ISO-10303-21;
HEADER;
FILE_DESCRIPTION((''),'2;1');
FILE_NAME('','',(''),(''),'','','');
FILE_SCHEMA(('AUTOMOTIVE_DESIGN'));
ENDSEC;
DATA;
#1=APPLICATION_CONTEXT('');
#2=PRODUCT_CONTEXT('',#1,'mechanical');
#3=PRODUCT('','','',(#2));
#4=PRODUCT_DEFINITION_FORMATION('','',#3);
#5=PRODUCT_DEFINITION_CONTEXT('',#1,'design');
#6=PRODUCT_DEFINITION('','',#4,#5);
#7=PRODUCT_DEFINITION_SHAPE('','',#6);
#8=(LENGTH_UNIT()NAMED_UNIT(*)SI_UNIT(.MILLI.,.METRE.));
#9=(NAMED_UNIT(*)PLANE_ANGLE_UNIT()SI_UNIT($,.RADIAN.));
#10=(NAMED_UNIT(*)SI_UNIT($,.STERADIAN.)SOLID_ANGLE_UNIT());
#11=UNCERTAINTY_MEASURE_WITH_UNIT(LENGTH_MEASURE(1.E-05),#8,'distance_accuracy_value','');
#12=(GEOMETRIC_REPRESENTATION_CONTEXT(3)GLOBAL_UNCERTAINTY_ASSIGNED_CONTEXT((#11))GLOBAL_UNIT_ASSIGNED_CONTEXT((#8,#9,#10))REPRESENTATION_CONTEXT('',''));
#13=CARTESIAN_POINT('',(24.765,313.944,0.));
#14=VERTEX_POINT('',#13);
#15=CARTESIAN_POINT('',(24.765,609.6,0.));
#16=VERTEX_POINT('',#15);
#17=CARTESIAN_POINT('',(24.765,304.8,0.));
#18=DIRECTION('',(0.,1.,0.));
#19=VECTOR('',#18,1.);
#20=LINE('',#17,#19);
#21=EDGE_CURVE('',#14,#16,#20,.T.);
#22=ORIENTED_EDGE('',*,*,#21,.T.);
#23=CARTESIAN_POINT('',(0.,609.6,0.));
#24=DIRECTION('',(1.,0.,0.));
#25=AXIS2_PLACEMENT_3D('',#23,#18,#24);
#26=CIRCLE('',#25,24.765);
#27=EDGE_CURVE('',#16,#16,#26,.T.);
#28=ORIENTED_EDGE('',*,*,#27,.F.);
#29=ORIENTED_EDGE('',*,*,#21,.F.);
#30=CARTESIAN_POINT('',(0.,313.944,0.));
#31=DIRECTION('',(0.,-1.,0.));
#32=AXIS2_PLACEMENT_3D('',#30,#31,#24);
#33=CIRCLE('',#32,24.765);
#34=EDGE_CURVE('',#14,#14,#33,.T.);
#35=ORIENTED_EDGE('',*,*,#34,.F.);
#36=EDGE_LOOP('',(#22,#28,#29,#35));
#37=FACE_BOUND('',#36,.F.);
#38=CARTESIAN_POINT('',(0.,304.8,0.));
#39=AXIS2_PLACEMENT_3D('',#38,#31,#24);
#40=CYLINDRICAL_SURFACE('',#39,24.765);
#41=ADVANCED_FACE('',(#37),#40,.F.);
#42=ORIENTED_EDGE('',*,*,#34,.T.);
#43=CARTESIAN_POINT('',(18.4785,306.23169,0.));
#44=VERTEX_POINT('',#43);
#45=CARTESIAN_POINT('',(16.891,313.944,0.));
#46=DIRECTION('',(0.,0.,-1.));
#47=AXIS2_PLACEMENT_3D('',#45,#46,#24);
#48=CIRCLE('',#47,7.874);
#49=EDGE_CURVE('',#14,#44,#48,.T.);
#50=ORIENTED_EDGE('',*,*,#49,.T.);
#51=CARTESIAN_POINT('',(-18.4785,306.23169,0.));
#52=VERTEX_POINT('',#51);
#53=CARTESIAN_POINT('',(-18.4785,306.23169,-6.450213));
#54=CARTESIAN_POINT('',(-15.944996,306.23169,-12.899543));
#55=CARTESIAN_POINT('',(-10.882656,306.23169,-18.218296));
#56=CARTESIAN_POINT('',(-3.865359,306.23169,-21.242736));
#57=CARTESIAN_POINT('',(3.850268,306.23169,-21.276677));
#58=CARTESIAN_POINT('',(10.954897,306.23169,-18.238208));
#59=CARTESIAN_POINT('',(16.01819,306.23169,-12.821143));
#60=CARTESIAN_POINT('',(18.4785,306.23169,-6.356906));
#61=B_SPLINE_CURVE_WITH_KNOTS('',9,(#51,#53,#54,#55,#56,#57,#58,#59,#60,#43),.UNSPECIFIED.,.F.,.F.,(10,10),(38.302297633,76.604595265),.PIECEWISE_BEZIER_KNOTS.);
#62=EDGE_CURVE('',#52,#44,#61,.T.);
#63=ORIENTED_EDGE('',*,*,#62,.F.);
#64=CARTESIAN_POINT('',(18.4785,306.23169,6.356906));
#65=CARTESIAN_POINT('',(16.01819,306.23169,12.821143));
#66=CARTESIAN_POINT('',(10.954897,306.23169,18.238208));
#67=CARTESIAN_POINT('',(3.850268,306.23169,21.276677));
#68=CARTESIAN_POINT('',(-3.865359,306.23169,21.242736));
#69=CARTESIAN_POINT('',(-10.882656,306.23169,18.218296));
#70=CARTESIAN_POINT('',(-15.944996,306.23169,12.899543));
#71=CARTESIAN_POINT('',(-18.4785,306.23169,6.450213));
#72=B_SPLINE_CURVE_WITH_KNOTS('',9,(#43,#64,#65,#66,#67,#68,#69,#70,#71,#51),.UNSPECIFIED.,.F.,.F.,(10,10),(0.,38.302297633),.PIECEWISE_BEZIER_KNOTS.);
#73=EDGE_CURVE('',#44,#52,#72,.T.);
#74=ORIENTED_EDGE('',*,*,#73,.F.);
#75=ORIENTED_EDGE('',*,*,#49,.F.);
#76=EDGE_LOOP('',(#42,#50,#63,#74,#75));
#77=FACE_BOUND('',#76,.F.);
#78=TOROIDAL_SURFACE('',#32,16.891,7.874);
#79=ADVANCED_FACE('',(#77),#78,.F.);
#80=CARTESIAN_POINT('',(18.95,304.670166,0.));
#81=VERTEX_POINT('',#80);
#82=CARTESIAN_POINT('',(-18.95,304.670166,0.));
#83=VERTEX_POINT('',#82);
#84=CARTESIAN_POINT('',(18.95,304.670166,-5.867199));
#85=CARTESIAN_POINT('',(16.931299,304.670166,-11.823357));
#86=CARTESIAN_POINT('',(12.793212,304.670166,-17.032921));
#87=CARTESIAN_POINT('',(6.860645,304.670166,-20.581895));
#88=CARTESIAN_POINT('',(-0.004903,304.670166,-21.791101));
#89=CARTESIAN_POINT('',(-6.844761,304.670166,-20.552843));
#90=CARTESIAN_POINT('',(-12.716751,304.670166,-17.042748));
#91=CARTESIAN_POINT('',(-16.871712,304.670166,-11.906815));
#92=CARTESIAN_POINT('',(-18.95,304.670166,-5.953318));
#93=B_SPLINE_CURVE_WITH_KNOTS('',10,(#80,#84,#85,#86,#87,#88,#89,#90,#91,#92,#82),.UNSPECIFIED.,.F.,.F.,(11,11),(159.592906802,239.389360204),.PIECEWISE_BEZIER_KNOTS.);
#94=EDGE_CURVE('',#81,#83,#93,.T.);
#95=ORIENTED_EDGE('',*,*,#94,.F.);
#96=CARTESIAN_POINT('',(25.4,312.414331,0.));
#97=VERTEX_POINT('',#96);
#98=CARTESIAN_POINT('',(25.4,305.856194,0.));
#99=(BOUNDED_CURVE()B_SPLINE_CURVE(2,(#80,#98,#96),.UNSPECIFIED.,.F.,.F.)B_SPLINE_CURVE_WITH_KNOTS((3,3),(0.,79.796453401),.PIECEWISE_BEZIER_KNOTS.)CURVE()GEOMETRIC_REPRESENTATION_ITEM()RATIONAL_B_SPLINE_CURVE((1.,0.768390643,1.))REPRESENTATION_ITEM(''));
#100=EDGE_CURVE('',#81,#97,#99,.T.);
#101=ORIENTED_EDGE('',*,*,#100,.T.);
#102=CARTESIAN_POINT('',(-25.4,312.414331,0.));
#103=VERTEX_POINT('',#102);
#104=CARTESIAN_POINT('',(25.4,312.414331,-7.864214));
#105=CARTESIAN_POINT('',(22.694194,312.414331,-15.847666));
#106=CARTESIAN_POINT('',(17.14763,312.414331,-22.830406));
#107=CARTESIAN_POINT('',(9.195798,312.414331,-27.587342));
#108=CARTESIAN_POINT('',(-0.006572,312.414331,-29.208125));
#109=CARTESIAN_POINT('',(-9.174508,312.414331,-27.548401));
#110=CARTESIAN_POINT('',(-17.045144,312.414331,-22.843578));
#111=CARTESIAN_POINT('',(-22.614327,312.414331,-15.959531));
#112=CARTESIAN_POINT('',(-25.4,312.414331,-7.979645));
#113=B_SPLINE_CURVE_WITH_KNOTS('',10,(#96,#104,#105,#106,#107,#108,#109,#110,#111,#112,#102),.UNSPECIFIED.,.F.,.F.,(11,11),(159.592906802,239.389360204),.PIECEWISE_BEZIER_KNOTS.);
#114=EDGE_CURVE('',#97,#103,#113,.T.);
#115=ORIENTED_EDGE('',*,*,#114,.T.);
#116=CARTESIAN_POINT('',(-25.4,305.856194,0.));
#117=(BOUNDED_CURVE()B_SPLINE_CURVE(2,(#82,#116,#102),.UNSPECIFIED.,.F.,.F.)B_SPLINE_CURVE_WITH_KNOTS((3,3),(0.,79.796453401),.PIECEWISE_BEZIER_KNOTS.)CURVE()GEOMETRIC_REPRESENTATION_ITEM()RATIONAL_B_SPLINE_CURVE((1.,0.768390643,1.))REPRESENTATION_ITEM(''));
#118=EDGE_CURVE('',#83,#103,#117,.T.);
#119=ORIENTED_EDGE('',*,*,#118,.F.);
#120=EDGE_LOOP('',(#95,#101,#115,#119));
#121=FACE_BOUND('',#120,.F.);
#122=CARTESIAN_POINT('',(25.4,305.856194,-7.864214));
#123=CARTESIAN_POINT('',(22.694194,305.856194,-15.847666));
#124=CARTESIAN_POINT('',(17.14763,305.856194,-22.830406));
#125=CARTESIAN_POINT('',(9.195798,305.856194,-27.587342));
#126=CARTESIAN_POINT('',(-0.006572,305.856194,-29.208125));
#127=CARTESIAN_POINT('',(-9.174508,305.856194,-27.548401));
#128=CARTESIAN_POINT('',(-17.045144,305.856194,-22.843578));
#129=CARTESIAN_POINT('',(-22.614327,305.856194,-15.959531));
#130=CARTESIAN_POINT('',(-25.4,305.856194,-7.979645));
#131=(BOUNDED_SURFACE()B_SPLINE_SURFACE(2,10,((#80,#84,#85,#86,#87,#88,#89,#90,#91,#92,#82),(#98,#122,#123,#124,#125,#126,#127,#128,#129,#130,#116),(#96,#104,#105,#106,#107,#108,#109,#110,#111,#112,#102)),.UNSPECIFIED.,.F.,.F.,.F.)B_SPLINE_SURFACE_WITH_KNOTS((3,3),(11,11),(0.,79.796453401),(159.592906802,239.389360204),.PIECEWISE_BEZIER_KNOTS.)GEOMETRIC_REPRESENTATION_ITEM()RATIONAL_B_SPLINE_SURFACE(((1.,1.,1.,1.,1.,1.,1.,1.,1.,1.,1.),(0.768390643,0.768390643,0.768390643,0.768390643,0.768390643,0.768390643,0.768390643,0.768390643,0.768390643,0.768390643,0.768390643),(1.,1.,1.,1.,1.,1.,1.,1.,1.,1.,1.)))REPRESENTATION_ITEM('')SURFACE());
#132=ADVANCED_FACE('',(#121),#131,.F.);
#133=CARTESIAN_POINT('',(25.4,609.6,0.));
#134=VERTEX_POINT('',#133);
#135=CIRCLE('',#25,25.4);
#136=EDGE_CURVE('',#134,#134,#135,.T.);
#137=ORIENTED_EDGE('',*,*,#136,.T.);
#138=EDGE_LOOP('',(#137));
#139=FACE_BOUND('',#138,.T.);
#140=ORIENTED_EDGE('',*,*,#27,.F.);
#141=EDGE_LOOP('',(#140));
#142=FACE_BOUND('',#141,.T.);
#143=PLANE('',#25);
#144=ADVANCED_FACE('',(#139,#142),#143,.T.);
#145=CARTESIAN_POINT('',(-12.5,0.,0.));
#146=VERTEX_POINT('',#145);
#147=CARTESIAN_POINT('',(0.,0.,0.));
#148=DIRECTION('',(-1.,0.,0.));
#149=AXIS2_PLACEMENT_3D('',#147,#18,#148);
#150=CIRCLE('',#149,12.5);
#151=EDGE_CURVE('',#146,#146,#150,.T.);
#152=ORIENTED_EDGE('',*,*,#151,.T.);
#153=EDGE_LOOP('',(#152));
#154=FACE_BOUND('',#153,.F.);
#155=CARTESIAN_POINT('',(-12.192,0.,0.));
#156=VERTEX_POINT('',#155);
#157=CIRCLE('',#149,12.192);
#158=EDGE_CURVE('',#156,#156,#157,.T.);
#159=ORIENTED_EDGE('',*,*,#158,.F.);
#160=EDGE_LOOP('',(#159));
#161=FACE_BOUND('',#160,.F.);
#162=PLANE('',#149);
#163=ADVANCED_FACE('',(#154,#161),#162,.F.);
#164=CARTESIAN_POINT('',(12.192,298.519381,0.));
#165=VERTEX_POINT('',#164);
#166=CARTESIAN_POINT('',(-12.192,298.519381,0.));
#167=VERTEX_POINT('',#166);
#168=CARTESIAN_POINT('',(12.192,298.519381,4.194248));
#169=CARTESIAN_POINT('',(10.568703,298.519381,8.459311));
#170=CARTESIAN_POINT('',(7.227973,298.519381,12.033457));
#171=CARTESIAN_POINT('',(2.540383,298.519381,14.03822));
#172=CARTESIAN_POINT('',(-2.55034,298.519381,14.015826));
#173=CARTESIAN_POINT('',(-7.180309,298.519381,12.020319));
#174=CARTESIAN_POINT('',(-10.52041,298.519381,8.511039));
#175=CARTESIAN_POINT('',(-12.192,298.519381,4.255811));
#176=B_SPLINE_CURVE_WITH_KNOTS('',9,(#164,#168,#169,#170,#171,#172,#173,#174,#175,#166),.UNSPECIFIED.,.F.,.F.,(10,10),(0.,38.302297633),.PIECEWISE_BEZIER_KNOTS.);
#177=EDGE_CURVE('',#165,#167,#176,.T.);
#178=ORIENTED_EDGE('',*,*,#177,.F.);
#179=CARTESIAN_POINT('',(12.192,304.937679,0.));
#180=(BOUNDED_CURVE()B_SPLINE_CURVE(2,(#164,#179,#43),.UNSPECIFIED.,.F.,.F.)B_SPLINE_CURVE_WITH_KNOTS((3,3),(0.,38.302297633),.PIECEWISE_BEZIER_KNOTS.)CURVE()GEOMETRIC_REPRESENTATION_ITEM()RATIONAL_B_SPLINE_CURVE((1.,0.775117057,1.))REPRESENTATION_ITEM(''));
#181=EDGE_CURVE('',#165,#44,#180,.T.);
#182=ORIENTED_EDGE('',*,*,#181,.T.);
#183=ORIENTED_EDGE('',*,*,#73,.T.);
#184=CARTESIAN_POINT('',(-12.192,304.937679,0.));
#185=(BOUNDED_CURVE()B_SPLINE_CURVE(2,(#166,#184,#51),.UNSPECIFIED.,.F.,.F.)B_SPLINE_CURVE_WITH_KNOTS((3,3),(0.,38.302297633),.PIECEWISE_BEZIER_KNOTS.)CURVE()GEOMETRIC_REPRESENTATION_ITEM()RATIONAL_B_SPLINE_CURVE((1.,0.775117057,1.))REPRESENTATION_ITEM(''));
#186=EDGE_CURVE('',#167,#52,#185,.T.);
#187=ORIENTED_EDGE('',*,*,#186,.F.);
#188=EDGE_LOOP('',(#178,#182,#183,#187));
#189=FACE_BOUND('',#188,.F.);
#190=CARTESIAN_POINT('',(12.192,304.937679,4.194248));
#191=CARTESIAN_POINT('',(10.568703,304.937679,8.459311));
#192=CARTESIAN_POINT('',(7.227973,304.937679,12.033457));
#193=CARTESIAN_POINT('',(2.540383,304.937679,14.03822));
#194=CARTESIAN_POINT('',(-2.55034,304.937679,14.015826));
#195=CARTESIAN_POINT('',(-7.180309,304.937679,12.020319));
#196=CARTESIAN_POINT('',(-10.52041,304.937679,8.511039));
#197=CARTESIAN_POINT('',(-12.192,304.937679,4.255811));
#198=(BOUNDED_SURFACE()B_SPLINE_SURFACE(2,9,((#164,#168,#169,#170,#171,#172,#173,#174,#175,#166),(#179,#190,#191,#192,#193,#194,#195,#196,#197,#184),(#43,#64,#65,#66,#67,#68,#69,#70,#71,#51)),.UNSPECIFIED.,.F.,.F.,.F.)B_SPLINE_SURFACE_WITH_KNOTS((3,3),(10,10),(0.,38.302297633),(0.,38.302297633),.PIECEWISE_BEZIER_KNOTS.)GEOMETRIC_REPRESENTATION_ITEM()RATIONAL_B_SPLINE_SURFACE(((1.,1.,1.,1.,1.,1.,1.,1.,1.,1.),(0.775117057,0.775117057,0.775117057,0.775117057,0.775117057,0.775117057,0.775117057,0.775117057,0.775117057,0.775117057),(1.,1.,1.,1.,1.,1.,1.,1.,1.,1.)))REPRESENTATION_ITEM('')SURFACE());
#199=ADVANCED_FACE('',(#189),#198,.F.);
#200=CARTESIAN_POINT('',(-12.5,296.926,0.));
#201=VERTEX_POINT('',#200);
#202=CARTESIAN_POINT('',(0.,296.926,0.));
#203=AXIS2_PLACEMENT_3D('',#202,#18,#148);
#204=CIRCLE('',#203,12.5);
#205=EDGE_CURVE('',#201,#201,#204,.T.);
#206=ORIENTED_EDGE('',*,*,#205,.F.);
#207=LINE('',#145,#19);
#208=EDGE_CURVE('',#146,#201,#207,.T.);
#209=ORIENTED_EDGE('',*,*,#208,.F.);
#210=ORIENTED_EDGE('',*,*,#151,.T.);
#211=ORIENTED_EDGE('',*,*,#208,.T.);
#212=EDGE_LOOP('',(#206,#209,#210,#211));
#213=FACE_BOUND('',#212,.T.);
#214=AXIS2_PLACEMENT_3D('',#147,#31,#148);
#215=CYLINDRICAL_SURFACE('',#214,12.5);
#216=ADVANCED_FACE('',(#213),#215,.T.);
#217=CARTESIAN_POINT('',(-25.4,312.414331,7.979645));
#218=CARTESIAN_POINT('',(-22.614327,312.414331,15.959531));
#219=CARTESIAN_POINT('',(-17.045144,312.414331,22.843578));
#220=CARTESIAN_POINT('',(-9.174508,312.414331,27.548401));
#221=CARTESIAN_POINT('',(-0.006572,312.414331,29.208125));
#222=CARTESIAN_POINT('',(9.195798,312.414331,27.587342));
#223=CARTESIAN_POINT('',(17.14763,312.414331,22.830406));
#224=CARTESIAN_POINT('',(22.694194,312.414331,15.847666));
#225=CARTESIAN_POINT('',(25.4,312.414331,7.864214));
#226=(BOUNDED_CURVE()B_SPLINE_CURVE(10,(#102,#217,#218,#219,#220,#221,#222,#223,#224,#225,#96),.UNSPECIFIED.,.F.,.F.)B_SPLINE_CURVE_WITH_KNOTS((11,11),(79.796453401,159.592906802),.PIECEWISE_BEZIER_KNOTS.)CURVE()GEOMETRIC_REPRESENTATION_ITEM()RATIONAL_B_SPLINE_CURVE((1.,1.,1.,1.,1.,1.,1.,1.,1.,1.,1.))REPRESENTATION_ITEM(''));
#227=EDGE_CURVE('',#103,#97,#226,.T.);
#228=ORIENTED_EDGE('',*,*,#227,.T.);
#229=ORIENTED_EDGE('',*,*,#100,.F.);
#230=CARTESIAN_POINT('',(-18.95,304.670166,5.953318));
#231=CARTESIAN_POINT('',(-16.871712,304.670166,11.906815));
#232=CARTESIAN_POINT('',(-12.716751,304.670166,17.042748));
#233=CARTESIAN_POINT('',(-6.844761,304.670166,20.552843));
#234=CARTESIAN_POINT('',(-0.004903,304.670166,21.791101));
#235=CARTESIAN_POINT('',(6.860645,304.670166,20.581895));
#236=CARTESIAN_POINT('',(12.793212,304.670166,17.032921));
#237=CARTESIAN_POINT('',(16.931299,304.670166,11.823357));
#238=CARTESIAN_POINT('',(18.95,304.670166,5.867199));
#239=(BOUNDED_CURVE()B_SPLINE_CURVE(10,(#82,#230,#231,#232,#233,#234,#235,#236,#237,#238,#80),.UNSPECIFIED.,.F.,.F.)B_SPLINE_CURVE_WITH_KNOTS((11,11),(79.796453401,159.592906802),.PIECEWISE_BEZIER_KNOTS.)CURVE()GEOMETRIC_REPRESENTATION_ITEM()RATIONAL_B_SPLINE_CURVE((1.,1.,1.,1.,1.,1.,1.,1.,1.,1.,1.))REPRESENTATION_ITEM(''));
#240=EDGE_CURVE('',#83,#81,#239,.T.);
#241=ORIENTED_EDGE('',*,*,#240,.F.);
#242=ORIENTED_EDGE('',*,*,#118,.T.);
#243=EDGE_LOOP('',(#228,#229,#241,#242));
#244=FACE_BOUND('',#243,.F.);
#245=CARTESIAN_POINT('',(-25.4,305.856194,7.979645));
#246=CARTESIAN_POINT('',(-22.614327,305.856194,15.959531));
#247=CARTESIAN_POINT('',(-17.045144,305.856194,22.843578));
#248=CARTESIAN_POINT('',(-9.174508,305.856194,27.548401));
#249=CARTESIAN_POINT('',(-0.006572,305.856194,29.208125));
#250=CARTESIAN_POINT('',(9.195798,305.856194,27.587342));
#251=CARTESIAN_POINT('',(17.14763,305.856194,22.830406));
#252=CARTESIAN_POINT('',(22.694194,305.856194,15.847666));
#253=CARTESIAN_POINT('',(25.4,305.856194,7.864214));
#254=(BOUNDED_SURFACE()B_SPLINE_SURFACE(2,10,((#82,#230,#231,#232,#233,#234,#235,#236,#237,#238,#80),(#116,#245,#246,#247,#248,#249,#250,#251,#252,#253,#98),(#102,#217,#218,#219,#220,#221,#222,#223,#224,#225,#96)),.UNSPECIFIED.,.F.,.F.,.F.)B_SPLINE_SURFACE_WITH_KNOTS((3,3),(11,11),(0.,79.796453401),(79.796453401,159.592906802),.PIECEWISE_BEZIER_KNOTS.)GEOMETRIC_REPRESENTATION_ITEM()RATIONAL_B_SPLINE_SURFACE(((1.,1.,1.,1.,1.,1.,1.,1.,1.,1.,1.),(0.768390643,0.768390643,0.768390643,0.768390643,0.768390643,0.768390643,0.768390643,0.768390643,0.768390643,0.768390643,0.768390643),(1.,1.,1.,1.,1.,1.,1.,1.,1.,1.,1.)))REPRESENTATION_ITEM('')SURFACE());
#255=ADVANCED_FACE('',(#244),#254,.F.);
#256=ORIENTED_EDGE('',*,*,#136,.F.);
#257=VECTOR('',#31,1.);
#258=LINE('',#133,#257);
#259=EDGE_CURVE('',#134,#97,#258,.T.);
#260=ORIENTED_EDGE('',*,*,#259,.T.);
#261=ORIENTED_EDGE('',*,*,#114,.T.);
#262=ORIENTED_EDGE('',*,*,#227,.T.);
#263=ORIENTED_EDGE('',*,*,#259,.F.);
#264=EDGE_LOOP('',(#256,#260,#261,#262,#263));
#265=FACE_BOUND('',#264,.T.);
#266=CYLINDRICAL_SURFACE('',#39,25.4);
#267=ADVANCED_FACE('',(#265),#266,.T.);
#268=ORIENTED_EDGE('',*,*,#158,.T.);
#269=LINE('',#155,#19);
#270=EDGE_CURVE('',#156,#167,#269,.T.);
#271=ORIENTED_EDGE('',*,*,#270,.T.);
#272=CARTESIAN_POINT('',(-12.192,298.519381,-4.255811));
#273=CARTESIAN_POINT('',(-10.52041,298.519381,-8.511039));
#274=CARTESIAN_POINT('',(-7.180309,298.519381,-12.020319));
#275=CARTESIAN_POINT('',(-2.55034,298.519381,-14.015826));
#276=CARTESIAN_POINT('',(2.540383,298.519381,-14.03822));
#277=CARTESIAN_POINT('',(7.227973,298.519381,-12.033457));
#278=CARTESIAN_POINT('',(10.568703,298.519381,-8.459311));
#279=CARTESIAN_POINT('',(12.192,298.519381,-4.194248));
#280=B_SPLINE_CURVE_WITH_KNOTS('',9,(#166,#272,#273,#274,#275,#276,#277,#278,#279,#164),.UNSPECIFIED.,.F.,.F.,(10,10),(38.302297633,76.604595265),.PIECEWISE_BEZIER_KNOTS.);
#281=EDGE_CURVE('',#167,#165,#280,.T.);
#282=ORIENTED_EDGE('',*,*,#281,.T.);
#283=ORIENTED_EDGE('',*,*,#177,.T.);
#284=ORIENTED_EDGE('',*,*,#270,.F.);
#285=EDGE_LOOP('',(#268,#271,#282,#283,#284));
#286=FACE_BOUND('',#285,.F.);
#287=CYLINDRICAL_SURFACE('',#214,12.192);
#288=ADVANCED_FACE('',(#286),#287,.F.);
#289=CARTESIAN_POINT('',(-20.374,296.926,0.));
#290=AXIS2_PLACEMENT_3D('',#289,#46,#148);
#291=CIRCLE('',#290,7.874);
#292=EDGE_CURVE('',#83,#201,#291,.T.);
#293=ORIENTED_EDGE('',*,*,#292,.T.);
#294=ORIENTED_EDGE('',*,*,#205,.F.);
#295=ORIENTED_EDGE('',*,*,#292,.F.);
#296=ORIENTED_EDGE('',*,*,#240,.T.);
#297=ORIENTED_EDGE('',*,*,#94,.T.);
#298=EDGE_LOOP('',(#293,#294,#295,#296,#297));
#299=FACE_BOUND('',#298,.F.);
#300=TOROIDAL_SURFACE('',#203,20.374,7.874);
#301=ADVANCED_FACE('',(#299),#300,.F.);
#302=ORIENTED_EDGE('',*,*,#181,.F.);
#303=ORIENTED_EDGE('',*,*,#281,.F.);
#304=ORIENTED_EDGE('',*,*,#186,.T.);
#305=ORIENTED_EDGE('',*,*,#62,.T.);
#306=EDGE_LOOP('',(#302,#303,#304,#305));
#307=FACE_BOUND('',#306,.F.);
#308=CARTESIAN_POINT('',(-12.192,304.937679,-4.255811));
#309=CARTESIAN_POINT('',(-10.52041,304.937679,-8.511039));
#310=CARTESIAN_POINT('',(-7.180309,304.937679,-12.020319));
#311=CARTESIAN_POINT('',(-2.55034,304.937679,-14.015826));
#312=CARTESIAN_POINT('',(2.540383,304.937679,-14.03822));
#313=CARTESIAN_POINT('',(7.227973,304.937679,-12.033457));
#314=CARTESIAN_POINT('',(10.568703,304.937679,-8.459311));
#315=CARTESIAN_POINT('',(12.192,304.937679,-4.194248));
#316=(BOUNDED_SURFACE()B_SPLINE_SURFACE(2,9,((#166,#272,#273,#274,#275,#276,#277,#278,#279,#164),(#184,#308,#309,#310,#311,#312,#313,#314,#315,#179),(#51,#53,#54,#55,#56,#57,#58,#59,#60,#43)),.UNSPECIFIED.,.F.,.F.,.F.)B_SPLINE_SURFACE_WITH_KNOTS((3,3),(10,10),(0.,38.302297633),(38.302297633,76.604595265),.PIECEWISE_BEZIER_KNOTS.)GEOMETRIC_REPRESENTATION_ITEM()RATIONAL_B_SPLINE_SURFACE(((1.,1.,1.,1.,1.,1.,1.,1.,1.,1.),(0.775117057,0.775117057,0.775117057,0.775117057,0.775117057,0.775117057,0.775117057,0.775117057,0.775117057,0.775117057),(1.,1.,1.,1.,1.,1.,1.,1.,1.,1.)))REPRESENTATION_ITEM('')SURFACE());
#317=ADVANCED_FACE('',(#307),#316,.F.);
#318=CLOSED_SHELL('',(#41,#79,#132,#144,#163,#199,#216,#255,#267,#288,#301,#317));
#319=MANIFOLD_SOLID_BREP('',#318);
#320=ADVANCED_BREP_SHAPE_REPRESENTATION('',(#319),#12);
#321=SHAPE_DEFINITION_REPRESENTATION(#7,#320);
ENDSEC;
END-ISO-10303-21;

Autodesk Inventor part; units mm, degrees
ref_plane "YZ Plane" through (0, 0, 0) normal (1, 0, 0) x (0, 1, 0)
ref_plane "XZ Plane" through (0, 0, 0) normal (0, 1, 0) x (-1, 0, 0)
ref_plane "XY Plane" through (0, 0, 0) normal (0, 0, 1) x (1, 0, 0)
sketch "Sketch1" plane through (0, 0, 0) normal (0, 1, 0) x (-1, 0, 0)
  circle A0 centre (0, 0) radius 12.5
  circle A1 centre (0, 0) radius 12.192
  dimension "d0" = 25
  dimension "d1" = 24.384
extrude "Extrusion1" add sketch "Sketch1" along normal blind 304.8
sketch "Sketch2" plane through (0, 304.8, 0) normal (0, 1, 0) x (1, 0, 0)
  circle A0 centre (0, 0) radius 24.765
  circle A1 centre (0, 0) radius 25.4
  dimension "d4" = 50.8
  dimension "d5" = 49.53
extrude "Extrusion2" add sketch "Sketch2" along normal blind 304.8
sketch "Sketch3" plane through (0, 304.8, 0) normal (0, -1, 0) x (1, 0, 0)
  circle A0 centre (0, 0) radius 25.4
  circle A1 centre (0, 0) radius 12.192
  dimension "d8" = 50.8
  dimension "d12" = 24.384
extrude "Extrusion3" add sketch "Sketch3" against normal blind 1.27
fillet "Fillet1" radius 7.874 3 edges at (12.5, 304.8, 0) (-24.765, 306.07, 0) (-25.4, 304.8, 0)
fillet "Fillet2" radius 7.874 1 edges at (-12.192, 306.07, 0)
properties part number "still pipe standin" material "Stainless Steel, Austenitic"
